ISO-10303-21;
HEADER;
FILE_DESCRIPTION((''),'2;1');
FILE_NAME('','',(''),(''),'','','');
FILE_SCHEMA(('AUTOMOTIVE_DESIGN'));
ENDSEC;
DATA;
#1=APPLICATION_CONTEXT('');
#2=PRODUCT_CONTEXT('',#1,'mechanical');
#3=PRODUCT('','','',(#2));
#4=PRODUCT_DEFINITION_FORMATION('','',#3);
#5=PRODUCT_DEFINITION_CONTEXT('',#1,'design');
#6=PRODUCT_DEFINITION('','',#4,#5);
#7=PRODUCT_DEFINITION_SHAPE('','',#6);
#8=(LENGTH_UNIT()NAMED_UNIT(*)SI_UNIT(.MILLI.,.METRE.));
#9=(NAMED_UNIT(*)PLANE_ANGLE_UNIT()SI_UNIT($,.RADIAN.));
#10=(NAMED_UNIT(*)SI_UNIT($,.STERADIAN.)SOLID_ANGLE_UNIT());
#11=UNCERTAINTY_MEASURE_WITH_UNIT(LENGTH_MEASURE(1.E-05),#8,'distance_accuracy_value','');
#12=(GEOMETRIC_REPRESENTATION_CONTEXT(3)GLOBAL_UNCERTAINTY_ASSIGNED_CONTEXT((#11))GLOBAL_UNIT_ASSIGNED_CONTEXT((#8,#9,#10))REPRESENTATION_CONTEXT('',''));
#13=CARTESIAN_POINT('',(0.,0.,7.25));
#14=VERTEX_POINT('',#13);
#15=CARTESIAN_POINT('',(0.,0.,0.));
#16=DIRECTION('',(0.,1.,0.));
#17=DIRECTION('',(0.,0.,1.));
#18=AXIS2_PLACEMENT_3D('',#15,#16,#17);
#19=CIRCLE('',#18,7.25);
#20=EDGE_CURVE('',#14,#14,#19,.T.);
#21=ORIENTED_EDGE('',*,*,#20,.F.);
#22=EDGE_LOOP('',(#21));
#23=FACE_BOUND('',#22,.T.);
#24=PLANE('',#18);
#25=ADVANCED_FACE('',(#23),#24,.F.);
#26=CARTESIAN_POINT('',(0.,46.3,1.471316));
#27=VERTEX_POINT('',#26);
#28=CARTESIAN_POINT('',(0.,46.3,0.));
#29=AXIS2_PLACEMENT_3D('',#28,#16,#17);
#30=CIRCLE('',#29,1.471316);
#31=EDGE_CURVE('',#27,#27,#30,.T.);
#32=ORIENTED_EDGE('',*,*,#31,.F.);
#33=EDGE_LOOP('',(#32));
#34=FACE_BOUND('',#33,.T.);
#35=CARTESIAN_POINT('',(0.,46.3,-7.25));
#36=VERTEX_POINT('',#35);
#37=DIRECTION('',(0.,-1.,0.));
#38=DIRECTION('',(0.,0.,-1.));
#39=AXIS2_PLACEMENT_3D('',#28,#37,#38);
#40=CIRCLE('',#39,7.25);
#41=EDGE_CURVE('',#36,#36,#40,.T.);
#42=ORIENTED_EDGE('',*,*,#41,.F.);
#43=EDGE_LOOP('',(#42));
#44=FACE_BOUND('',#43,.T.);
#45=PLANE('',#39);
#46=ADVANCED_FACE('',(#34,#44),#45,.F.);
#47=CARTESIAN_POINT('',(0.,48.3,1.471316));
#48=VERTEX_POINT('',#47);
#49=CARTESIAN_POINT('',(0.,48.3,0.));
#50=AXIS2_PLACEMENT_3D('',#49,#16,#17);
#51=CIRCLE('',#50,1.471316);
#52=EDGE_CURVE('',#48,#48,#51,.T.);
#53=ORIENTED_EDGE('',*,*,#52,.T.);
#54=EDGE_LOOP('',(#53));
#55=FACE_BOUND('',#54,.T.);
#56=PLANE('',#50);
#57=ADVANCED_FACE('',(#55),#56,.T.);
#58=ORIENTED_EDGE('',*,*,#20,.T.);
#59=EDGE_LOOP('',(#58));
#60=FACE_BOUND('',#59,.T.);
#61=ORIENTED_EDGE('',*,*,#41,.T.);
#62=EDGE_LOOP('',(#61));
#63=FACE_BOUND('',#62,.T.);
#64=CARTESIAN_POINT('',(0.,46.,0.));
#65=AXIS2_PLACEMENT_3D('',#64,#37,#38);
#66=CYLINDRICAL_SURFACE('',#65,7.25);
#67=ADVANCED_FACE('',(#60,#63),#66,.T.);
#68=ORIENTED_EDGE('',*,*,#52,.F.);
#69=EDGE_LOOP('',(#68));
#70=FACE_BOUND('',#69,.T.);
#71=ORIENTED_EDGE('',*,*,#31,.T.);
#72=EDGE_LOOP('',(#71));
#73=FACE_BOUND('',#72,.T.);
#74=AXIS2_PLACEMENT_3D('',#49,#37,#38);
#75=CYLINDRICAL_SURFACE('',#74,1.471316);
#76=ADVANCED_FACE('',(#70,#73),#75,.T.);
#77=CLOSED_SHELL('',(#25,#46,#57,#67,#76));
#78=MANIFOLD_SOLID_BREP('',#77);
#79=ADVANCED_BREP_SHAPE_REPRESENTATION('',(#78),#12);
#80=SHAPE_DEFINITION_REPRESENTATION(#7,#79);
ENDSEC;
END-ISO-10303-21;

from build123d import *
from build123d.topology import SkipClean

# Parameters (mm, degrees)
SKETCH1_R           = 7.25
BOSS_EXTRUDE1_DEPTH = 46
SKETCH2_R           = 7
CUT_EXTRUDE1_DEPTH  = 64.5
SKETCH4_R           = 7.25
BOSS_EXTRUDE2_DEPTH = 46
SKETCH6_R           = 1.471316345
BOSS_EXTRUDE3_DEPTH = 2


with BuildPart() as part:
    # Sketch1 → Boss-Extrude1 (new body)
    with BuildSketch(Plane(origin=(0, 0, 0), x_dir=(1, 0, 0), z_dir=(0, 1, 0))):
        Circle(SKETCH1_R)
    extrude(amount=BOSS_EXTRUDE1_DEPTH)

    # Sketch2 → Cut-Extrude1 (cut)
    with BuildSketch(Plane(origin=(0, 0.3, 0), x_dir=(-1, 0, 0), z_dir=(0, -1, 0))):
        Circle(SKETCH2_R)
    extrude(amount=-CUT_EXTRUDE1_DEPTH, mode=Mode.SUBTRACT)

    # Sketch4 → Boss-Extrude2 (add)
    with SkipClean():  # the faces are left unmerged after this step: merging them gives an invalid solid
        with BuildSketch(Plane(origin=(0, 0.3, 0), x_dir=(-1, 0, 0), z_dir=(0, -1, 0))):
            Circle(SKETCH4_R)
        extrude(amount=-BOSS_EXTRUDE2_DEPTH)
    add(part.part.scale(1), mode=Mode.REPLACE)  # the faces are merged on a copy

    # Sketch6 → Boss-Extrude3 (add)
    with BuildSketch(Plane(origin=(0, 46.3, 0), x_dir=(1, 0, 0), z_dir=(0, 1, 0))):
        Circle(SKETCH6_R)
    extrude(amount=BOSS_EXTRUDE3_DEPTH)


solid = part.part
